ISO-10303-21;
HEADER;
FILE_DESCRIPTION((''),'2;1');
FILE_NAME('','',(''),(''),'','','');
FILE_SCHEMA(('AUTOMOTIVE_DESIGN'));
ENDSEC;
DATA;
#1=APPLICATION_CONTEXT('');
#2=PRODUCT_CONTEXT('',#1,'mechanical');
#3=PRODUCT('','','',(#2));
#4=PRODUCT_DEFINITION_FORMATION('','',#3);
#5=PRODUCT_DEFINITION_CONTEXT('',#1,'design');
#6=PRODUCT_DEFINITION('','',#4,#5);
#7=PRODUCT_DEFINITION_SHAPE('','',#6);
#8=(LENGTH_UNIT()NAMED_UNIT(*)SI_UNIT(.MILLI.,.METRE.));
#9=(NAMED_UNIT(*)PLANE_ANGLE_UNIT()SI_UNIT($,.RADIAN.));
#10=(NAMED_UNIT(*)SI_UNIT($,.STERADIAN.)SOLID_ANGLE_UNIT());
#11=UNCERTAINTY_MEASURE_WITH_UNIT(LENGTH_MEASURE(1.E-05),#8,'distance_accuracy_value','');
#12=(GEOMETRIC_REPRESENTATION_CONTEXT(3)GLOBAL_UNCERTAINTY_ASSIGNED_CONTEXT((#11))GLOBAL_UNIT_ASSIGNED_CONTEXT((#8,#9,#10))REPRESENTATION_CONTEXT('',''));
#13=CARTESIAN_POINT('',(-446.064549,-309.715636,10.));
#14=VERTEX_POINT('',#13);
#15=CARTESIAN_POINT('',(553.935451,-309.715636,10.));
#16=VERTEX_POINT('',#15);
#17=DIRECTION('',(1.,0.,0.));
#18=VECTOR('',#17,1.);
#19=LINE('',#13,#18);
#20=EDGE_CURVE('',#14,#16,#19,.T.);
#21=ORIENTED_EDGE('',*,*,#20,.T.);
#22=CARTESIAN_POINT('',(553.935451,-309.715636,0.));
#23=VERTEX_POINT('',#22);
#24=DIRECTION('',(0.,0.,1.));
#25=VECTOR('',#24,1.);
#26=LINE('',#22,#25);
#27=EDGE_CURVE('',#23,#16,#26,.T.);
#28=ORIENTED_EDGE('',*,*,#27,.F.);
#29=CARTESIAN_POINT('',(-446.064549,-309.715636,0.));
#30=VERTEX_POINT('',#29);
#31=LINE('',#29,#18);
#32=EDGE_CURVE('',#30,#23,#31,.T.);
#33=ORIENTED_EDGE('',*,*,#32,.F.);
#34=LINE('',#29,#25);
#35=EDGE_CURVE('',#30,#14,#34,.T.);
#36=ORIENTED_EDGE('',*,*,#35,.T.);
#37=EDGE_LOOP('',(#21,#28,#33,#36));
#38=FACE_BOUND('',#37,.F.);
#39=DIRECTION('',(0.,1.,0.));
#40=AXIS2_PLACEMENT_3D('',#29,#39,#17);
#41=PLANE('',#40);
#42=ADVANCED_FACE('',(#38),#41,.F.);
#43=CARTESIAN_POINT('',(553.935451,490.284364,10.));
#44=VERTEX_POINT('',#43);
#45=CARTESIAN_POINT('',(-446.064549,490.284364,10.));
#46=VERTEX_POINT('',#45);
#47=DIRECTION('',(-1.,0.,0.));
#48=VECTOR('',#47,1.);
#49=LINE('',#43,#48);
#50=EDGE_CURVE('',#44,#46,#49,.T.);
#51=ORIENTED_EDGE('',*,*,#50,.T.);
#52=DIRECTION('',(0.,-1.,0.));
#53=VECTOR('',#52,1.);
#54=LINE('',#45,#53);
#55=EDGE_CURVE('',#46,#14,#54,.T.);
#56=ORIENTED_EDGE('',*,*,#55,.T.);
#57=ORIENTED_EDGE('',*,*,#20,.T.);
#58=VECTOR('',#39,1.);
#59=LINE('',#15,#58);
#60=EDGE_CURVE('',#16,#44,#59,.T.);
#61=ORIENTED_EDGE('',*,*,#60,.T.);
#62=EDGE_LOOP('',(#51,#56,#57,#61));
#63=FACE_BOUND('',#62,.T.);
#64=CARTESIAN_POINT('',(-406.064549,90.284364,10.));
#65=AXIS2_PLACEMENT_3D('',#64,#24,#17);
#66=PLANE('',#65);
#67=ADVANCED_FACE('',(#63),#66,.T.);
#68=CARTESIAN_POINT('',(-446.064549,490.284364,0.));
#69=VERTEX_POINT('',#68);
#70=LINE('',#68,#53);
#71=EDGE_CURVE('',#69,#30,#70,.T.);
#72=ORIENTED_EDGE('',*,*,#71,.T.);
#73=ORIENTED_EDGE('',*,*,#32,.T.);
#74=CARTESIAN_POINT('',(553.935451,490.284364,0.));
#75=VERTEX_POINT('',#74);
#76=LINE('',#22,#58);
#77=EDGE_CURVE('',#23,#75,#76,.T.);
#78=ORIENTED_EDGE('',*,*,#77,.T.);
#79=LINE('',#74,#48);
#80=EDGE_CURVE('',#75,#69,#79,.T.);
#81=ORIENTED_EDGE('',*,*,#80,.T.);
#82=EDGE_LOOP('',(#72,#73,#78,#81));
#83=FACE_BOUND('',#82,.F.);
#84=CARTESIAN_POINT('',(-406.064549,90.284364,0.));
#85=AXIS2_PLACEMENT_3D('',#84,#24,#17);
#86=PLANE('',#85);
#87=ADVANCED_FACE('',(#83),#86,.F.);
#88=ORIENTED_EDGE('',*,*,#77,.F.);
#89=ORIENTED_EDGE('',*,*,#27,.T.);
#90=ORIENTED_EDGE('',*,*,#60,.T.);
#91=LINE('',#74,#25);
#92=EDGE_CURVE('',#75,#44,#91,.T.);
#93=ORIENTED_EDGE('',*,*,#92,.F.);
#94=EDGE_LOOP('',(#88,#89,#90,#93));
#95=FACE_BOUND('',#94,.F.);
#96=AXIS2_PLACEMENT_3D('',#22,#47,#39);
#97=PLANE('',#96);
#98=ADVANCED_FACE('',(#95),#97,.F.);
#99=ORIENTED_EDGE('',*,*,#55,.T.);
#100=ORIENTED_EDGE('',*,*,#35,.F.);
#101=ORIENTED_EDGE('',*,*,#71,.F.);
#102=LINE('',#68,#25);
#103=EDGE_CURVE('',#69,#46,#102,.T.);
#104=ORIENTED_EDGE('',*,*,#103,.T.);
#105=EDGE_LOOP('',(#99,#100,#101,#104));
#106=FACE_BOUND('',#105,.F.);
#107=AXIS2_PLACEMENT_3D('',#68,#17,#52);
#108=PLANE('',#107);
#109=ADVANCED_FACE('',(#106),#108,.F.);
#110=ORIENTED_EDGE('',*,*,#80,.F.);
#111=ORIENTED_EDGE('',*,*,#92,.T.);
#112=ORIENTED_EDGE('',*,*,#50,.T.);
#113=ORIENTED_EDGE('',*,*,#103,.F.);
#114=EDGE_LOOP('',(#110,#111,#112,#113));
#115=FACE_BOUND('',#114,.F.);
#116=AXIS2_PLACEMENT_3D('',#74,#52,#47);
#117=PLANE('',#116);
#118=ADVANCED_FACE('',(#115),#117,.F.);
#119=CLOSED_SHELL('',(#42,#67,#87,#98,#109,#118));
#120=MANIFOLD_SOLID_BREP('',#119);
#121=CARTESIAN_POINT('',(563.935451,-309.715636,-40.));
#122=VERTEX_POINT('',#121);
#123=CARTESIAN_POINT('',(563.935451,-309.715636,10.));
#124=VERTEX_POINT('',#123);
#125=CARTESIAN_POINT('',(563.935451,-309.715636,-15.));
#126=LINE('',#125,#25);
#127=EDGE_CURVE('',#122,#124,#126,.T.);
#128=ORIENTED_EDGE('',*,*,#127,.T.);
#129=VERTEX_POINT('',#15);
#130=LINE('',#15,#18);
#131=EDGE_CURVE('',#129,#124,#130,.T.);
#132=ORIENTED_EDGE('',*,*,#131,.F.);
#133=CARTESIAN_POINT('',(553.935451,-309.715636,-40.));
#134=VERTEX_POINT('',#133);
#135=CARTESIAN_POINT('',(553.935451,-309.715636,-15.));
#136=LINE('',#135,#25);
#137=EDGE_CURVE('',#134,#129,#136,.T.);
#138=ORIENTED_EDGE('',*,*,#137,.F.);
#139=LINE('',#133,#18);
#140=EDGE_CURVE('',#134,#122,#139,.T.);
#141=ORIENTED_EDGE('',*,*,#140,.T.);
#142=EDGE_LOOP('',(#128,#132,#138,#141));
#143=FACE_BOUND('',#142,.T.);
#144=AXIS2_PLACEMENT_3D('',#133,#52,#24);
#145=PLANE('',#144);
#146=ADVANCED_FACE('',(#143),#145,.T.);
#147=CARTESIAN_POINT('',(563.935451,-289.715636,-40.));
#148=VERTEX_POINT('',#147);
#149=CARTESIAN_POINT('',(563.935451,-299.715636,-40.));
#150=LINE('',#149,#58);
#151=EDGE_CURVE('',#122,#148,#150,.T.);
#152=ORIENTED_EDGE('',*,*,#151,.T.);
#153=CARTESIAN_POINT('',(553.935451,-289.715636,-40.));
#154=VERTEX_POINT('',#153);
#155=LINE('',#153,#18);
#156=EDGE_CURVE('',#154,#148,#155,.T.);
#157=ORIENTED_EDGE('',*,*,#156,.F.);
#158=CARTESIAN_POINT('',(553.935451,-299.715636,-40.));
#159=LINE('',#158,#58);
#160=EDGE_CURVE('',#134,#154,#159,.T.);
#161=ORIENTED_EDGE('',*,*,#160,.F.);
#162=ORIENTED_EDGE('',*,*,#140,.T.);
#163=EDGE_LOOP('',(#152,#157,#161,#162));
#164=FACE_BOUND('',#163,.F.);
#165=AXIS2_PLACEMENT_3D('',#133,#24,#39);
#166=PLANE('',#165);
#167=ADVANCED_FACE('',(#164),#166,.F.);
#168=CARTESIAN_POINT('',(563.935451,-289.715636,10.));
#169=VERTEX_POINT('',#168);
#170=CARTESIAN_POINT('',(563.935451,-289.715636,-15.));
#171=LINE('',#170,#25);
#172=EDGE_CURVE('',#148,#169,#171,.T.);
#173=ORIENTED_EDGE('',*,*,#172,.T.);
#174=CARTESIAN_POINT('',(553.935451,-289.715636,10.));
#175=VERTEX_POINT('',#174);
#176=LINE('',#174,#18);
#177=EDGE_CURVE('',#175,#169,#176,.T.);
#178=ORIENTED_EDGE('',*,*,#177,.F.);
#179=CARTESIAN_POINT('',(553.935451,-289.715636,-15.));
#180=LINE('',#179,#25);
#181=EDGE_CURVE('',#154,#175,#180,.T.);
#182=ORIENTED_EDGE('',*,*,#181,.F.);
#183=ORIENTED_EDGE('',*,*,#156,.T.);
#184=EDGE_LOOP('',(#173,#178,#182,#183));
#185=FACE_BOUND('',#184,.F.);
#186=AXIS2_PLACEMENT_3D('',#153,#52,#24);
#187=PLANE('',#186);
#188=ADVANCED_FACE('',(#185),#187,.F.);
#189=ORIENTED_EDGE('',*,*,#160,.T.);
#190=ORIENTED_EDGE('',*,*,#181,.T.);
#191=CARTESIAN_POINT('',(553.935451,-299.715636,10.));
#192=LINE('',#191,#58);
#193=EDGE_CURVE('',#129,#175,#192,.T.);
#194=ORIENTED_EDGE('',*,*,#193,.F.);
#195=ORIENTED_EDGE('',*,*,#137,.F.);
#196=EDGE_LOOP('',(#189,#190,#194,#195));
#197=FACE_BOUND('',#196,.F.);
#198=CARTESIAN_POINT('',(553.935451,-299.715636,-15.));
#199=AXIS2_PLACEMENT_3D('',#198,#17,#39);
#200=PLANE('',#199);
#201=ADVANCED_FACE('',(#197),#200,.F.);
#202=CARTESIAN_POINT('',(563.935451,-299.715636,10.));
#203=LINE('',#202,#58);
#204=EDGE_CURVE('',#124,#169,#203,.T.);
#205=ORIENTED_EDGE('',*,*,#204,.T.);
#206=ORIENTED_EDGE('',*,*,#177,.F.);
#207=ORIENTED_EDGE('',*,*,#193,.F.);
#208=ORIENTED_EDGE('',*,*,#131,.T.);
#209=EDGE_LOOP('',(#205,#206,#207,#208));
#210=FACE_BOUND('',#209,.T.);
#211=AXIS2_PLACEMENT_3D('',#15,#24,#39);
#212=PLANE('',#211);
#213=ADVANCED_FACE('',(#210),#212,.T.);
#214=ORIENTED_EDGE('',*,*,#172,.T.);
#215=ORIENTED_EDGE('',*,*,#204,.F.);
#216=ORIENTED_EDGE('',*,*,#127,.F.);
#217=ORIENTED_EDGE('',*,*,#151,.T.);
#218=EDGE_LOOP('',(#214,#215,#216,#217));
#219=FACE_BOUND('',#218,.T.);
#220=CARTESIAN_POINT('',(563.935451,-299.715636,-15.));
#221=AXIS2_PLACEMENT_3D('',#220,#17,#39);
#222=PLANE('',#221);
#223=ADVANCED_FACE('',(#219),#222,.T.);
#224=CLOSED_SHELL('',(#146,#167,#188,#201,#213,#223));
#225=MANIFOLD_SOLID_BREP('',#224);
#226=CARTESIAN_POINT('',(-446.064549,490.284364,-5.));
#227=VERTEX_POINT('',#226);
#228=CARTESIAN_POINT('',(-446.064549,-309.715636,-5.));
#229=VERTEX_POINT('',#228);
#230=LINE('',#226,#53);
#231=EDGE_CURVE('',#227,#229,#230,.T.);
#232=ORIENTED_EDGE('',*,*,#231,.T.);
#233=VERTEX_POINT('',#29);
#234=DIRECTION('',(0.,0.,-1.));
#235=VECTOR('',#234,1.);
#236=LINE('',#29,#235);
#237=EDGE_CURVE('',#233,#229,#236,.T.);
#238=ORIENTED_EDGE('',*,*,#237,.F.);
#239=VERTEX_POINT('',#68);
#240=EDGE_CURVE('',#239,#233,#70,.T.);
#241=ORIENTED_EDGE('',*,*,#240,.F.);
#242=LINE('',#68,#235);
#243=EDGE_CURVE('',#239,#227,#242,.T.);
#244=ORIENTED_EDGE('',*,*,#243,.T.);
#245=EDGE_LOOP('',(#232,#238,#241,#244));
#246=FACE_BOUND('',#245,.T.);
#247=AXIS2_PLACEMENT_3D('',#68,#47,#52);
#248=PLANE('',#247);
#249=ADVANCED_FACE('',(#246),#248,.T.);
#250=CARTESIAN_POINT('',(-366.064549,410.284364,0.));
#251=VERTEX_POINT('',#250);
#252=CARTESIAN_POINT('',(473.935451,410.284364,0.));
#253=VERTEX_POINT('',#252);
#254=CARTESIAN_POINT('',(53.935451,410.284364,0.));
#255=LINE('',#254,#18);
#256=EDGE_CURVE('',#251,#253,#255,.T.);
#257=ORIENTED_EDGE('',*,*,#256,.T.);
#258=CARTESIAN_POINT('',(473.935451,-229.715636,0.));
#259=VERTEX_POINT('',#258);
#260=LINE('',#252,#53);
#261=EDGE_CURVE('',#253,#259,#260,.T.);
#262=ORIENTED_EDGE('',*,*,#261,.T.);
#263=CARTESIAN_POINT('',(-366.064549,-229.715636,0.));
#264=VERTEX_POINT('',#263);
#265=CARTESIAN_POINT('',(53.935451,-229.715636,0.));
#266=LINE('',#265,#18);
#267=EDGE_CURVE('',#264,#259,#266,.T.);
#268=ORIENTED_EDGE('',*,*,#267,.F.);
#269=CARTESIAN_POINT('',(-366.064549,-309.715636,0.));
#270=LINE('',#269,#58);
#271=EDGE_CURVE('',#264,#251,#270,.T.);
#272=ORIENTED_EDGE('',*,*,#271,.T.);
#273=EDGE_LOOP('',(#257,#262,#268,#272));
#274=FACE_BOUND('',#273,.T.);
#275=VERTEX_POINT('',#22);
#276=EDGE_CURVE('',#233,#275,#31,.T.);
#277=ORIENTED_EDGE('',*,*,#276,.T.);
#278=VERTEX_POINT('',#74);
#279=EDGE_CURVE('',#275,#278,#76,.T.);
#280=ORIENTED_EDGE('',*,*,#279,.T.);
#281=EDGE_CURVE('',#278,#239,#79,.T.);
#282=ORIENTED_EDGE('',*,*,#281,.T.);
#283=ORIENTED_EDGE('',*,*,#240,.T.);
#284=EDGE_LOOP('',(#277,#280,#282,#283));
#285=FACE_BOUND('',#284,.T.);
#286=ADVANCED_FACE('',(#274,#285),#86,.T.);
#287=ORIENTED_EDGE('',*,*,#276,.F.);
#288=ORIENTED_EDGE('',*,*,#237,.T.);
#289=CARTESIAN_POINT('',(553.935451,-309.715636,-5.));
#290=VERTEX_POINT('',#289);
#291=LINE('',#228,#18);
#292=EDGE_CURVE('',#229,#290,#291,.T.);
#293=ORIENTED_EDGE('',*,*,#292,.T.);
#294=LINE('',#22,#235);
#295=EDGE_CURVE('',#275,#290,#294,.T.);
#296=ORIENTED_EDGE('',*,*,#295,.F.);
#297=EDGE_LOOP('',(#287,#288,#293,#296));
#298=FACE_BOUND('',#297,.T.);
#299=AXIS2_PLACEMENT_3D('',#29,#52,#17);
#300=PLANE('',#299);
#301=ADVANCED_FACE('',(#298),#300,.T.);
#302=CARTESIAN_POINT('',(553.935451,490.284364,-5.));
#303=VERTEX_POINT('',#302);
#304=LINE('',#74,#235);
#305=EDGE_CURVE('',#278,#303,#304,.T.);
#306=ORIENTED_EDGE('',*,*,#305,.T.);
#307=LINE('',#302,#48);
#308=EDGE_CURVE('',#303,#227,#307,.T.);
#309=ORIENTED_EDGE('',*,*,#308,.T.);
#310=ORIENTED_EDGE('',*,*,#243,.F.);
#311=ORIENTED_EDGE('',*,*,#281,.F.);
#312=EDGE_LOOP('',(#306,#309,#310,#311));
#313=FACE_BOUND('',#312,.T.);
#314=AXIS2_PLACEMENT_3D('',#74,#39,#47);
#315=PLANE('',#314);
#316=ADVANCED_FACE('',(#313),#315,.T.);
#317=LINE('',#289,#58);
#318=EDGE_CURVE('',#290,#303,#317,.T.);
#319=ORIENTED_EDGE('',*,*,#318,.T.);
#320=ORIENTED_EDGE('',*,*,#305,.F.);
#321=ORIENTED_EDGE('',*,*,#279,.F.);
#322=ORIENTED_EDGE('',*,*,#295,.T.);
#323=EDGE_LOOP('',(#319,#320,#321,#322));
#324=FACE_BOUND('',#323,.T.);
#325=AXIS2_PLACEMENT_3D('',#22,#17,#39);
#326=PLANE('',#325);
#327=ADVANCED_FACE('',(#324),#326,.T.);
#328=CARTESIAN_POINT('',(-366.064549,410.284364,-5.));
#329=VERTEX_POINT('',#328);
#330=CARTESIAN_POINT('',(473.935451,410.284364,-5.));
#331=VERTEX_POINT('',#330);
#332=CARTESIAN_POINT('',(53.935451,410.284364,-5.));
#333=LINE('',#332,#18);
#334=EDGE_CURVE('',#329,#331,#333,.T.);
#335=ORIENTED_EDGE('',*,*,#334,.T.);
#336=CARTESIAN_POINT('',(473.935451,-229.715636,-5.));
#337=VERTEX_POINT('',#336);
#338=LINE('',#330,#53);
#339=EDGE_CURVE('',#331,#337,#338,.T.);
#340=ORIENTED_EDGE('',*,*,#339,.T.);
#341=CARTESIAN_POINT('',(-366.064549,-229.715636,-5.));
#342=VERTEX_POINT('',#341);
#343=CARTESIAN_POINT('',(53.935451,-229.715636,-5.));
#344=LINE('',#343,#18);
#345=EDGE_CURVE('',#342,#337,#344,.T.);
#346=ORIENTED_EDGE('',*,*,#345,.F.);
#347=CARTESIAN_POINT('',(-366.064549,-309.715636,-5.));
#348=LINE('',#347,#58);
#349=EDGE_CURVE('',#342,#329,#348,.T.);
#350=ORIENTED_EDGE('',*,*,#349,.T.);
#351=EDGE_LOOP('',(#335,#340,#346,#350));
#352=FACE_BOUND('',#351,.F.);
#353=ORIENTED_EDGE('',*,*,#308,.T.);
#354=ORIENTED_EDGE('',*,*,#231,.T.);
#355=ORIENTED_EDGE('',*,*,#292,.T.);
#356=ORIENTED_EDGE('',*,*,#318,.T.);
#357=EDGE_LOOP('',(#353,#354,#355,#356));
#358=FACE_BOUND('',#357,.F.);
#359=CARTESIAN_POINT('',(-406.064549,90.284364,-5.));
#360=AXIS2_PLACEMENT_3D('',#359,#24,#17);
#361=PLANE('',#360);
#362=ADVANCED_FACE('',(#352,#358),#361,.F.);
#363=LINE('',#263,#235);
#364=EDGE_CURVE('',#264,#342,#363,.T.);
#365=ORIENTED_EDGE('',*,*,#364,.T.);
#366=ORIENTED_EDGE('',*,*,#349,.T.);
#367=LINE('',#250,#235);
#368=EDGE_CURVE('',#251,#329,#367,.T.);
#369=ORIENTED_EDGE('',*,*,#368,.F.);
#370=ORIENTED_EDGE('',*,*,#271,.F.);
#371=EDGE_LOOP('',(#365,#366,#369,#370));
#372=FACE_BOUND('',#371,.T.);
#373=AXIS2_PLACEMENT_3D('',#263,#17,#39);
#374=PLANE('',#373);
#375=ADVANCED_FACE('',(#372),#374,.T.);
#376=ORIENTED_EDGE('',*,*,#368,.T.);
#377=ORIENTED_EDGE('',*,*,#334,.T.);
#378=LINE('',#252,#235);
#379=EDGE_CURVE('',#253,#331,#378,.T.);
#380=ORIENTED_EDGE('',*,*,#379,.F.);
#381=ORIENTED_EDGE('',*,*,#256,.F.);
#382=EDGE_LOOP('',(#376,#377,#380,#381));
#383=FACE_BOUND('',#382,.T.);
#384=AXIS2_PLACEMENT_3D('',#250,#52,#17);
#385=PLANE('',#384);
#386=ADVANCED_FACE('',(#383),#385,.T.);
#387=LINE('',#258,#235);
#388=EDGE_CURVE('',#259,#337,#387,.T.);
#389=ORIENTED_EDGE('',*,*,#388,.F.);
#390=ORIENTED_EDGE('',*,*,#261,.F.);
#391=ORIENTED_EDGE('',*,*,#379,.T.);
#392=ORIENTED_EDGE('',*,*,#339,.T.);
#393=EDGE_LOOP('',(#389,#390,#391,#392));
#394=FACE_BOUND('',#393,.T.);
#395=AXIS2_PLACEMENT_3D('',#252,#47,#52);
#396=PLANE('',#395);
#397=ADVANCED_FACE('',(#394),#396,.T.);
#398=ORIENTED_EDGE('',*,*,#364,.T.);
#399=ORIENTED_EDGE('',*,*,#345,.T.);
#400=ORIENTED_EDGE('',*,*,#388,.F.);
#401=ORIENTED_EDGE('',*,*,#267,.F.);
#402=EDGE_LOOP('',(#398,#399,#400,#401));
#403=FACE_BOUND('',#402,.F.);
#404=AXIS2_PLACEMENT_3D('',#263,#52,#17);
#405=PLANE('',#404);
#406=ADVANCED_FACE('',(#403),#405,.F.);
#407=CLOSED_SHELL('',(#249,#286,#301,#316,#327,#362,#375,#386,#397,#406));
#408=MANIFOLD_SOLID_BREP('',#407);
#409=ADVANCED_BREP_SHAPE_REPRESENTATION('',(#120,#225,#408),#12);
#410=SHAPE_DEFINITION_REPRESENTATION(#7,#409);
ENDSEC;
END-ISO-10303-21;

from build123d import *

# Parameters (mm, degrees)
F0_W     = 840
F0_H     = 80
F0_H_2   = 640
F1_DEPTH = 10
F2_DEPTH = 5
F3_W     = 20
F3_H     = 50
F4_DEPTH = 10


# Not quite as in the source:
# - a feature names something its author has since deleted; it is built from what else it names


with BuildPart() as f1:
    # F0 (on Top) → F1 (new body)
    with BuildSketch(Plane.XY):
        Polygon((-446.064549312, 490.2843640471), (-446.064549312, -309.7156359529), (-366.064549312, -309.7156359529), (-366.064549312, -229.7156359529), (-366.064549312, 410.2843640471), (-366.064549312, 490.2843640471), align=None)
        with Locations((53.935450688, -269.7156359529)):
            Rectangle(F0_W, F0_H)
        Polygon((473.935450688, -229.7156359529), (473.935450688, -309.7156359529), (553.935450688, -309.7156359529), (553.935450688, 490.2843640471), (473.935450688, 490.2843640471), (473.935450688, 410.2843640471), align=None)
        with Locations((53.935450688, 90.2843640471)):
            Rectangle(F0_W, F0_H_2)
        with Locations((53.935450688, 450.2843640471)):
            Rectangle(F0_W, F0_H)
    extrude(amount=F1_DEPTH)


with BuildPart() as f2:
    # F0 (on Top) → F2 (new body)
    with BuildSketch(Plane.XY):
        Polygon((-446.064549312, 490.2843640471), (-446.064549312, -309.7156359529), (-366.064549312, -309.7156359529), (-366.064549312, -229.7156359529), (-366.064549312, 410.2843640471), (-366.064549312, 490.2843640471), align=None)
        with Locations((53.935450688, 450.2843640471)):
            Rectangle(F0_W, F0_H)
        with Locations((53.935450688, -269.7156359529)):
            Rectangle(F0_W, F0_H)
        Polygon((473.935450688, -229.7156359529), (473.935450688, -309.7156359529), (553.935450688, -309.7156359529), (553.935450688, 490.2843640471), (473.935450688, 490.2843640471), (473.935450688, 410.2843640471), align=None)
    extrude(amount=-F2_DEPTH)


with BuildPart() as f4:
    # F3 (on face) → F4 (new body)
    with BuildSketch(Plane.YZ.offset(553.935450688)):
        with Locations((-299.7156359529, -15)):
            Rectangle(F3_W, F3_H)
    extrude(amount=F4_DEPTH)


solid = Compound([f1.part, f2.part, f4.part])
